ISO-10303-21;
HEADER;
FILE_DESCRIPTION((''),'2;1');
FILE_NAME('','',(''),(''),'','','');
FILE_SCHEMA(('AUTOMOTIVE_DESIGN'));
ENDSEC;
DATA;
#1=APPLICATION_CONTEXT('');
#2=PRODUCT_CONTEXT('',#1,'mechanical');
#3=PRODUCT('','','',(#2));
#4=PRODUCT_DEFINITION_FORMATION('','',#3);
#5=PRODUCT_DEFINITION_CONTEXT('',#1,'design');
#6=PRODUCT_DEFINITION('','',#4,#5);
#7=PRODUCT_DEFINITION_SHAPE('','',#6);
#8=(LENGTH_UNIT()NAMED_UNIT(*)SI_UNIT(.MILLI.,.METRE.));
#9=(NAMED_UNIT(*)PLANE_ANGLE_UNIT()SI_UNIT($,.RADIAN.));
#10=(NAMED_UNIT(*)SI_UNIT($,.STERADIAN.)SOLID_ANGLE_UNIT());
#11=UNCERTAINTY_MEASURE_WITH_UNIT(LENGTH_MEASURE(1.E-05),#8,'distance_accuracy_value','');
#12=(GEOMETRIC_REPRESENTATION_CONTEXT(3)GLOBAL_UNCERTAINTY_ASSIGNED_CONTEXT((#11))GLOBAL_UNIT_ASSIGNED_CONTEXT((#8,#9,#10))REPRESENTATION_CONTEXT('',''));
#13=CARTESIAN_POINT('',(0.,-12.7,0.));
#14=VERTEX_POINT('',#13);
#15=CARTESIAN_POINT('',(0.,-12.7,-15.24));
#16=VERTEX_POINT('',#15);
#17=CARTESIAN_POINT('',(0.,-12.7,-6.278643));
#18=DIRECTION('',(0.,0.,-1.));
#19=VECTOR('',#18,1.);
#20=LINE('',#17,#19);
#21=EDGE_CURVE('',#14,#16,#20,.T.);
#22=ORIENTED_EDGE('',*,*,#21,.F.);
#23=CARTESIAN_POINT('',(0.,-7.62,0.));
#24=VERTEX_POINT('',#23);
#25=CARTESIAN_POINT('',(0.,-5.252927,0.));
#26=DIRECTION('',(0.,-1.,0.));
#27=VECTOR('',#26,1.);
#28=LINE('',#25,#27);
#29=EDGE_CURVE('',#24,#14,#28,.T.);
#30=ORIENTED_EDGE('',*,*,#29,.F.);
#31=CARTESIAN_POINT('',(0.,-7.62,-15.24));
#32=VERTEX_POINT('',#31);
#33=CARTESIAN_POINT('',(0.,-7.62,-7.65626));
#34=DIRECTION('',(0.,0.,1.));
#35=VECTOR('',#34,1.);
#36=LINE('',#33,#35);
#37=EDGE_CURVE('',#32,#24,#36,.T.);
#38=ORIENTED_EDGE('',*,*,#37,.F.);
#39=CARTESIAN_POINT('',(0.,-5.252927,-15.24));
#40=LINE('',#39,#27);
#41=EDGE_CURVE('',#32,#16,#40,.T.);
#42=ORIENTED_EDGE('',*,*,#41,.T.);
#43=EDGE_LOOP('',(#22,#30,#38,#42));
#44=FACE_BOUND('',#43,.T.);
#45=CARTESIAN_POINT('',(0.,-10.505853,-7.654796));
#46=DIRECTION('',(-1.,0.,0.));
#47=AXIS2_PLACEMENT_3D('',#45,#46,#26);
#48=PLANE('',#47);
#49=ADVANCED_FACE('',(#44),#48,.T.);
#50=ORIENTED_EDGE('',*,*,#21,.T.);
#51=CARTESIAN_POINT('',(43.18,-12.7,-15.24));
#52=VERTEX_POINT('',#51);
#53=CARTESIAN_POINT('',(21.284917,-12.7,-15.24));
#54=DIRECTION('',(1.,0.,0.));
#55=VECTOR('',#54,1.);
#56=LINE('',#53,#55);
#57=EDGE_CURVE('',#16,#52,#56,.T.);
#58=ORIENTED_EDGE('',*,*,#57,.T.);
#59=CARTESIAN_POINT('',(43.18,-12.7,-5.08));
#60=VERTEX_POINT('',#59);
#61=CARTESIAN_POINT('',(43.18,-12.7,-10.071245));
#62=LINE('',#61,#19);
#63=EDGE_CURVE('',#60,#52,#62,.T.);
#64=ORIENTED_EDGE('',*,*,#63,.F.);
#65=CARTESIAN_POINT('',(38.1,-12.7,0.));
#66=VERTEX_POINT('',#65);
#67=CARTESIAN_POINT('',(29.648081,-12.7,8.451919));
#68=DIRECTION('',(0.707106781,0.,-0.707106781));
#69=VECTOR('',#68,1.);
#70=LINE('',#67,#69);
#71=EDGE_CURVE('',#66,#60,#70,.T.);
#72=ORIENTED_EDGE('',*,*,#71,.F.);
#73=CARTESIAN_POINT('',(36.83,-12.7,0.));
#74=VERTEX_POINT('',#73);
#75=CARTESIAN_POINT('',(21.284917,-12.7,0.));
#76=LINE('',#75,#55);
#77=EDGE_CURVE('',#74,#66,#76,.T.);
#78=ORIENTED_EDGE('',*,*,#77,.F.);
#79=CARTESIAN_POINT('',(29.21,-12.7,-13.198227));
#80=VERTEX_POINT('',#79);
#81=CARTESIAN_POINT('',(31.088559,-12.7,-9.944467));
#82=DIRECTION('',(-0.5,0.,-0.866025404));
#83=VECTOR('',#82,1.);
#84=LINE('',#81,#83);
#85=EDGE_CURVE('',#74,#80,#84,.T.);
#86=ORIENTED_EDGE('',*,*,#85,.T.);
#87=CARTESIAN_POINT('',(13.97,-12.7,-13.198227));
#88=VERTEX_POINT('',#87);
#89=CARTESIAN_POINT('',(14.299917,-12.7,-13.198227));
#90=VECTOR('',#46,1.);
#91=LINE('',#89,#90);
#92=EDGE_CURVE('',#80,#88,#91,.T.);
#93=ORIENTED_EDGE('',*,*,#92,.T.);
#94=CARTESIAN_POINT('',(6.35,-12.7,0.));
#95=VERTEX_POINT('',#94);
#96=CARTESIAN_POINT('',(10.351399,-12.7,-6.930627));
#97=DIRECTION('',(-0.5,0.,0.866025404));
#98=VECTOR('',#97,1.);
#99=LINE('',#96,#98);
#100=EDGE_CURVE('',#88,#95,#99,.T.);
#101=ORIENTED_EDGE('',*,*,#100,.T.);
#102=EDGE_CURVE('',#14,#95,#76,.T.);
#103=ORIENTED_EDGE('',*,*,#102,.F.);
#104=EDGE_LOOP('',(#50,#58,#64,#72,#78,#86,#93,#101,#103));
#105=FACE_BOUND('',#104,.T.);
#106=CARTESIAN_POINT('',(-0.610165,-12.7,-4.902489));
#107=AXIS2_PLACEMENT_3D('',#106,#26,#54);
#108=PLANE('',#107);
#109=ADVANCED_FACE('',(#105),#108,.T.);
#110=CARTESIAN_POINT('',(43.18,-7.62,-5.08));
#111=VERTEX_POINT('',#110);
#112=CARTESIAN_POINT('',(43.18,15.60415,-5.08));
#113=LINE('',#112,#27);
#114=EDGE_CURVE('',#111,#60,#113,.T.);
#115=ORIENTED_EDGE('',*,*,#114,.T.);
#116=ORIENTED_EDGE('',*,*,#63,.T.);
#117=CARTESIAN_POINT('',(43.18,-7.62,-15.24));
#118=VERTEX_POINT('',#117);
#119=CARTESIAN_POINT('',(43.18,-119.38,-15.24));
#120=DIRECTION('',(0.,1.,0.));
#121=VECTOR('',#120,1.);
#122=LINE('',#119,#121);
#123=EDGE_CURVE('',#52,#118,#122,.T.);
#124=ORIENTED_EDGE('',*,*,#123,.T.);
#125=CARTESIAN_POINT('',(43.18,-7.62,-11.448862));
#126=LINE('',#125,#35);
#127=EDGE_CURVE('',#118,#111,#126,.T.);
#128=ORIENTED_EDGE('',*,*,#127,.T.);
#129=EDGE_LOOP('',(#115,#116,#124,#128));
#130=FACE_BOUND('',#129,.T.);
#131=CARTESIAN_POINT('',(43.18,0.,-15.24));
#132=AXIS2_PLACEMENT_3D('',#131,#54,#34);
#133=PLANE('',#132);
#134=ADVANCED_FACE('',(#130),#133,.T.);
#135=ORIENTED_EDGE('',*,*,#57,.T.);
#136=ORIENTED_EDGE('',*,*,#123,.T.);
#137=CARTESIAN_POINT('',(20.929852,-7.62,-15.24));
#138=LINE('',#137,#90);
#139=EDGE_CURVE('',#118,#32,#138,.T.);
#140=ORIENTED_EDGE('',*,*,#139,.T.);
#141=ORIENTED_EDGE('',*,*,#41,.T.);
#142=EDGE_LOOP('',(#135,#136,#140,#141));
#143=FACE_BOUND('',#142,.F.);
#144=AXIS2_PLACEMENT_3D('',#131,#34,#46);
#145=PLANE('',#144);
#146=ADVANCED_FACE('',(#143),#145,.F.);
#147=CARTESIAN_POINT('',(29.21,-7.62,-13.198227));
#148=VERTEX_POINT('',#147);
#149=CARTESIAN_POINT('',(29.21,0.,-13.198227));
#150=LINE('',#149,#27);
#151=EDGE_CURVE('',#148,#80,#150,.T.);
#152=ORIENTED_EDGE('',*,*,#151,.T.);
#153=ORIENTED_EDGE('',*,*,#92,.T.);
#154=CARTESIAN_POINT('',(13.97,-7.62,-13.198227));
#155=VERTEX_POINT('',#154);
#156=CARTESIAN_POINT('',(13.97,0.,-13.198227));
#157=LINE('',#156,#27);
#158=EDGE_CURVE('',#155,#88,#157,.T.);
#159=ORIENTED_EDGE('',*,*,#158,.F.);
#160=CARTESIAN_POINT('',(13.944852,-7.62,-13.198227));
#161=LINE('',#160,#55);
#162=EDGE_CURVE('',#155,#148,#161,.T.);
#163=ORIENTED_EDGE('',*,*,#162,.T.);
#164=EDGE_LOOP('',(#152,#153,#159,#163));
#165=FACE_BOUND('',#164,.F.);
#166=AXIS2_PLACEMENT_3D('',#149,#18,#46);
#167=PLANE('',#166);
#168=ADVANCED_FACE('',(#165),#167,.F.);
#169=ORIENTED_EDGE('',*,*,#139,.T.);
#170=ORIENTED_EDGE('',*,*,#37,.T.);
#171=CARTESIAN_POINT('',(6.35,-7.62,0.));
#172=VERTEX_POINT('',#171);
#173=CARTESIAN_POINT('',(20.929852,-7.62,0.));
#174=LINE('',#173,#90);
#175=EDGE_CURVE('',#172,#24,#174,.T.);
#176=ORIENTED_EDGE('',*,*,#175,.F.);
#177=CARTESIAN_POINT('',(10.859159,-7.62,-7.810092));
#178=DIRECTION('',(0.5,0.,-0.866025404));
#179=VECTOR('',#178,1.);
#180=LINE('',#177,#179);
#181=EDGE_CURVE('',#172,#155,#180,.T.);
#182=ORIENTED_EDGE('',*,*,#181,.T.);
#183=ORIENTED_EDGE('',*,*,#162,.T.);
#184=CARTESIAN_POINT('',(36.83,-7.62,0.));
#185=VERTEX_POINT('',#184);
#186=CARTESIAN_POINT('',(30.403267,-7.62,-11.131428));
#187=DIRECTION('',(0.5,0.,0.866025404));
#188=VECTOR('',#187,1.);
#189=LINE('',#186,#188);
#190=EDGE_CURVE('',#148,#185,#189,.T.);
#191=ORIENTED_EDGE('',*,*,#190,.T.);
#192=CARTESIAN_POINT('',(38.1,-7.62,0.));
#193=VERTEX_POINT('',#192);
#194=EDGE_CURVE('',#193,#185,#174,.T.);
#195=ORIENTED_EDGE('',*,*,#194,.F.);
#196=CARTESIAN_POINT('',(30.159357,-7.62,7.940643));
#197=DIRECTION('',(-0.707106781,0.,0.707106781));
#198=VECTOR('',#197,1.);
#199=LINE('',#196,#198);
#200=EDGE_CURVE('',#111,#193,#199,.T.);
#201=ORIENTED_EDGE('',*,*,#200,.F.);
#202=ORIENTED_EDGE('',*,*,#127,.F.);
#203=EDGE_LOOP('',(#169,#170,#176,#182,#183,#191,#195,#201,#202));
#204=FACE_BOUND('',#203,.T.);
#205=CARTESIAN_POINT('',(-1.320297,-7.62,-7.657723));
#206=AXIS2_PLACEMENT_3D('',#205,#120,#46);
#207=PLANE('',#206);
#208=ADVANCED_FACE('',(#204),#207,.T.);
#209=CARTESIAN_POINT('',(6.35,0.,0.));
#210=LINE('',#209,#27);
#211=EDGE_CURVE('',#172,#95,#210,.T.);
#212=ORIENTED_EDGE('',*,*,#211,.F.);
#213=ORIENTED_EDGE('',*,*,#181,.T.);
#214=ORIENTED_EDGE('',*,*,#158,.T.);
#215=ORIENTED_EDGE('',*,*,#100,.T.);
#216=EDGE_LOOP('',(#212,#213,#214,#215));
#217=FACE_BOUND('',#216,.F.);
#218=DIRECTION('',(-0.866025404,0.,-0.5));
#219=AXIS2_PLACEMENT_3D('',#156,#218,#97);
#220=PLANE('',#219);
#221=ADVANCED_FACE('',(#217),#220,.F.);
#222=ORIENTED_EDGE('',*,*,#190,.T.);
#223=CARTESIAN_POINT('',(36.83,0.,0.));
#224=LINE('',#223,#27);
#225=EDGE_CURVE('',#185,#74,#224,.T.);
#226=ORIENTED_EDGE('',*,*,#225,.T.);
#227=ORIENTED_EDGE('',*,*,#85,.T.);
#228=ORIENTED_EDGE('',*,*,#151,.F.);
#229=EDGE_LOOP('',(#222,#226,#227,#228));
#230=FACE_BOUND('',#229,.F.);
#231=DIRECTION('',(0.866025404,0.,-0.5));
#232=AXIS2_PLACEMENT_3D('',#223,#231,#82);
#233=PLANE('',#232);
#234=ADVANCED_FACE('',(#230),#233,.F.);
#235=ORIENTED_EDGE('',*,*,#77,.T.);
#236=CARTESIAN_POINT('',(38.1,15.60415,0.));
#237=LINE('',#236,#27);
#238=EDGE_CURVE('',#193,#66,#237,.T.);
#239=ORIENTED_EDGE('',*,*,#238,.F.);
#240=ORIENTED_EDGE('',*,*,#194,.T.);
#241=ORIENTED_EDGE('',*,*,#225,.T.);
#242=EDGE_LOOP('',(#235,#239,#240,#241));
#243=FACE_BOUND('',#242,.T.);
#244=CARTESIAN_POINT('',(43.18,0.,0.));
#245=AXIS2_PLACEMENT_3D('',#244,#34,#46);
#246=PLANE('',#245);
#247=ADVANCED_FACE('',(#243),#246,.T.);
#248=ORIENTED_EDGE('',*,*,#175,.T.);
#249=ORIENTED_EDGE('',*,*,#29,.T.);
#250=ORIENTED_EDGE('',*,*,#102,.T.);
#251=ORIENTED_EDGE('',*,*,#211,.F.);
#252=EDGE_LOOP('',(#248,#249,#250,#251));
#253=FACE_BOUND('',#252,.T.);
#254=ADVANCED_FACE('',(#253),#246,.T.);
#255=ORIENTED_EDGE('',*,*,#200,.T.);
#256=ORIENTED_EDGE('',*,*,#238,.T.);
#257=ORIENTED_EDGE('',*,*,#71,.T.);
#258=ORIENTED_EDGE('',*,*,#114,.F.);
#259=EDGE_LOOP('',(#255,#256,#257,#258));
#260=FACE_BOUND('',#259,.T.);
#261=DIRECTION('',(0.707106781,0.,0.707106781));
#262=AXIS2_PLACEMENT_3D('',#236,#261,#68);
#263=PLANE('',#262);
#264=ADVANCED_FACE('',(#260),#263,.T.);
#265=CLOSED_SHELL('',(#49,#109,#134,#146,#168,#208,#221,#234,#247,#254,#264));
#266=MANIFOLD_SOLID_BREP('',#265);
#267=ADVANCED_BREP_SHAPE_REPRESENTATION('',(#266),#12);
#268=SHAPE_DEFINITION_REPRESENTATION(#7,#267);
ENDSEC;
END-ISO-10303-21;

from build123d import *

# Parameters (mm, degrees)
F1_DEPTH    = 116.84
F2_W        = 86.36
F2_H        = 15.24
F3_DEPTH    = 2.54
F4_W        = 86.36
F4_H        = 15.24
F5_DEPTH    = 2.54
F6_T1_DEPTH = 148.0482991577
F6_T3_DEPTH = 112.4882991577
F7_SIZE     = 5.08
F8_W        = 91.7793288827
F8_H        = 30.2478149533
F9_DEPTH    = 106.68
F10_W       = 99.2863364518
F10_H       = 25.3497036174
F11_DEPTH   = 10.16
F12_W       = 15.3326203581
F12_H       = 21.305212751
F13_DEPTH   = 43.18


# Not quite as in the source:
# - a fillet or chamfer that OpenCascade refuses, or shapes differently, is made with other operations: its cross-section is extruded or revolved along the edge and cut away or added


with BuildPart() as f1:
    # F0 (on Front) → F1 (new body)
    with BuildSketch(Plane.XZ):
        Polygon((43.18, 0), (36.83, 0), (29.21, -13.1982271537), (13.97, -13.1982271537), (6.35, 0), (0, 0), (-6.35, 0), (-13.97, -13.1982271537), (-29.21, -13.1982271537), (-36.83, 0), (-43.18, 0), (-43.18, -15.24), (0, -15.24), (43.18, -15.24), align=None)
    extrude(amount=F1_DEPTH)

    # F2 (on face) → F3 (join)
    with BuildSketch(Plane.XZ.offset(116.84)):
        with Locations((0, -7.62)):
            Rectangle(F2_W, F2_H)
    extrude(amount=F3_DEPTH)

    # F4 (on face) → F5 (join)
    with BuildSketch(Plane(origin=(0, 0, 0), x_dir=(-1, 0, 0), z_dir=(0, 1, 0))):
        with Locations((0, -7.62)):
            Rectangle(F4_W, F4_H)
    extrude(amount=F5_DEPTH)

    # F6: chamfer of 5.08 on 4 edges, made by hand

    # F6_s2 → F6_t1 (cut)
    with BuildSketch(Plane.XZ.offset(-15.6041495789)):
        Polygon((-38.1, 0), (-43.18, -5.08), (-43.18, 0), align=None)
        Polygon((38.1, 0), (43.18, -5.08), (43.18, 0), align=None)
    extrude(amount=F6_T1_DEPTH, mode=Mode.SUBTRACT)

    # F6_s4 → F6_t3 (cut)
    with BuildSketch(Plane.YZ.offset(-56.2441495789)):
        Polygon((-114.3, 0), (-119.38, -5.08), (-119.38, 0), align=None)
        Polygon((-2.54, 0), (2.54, -5.08), (2.54, 0), align=None)
    extrude(amount=F6_T3_DEPTH, mode=Mode.SUBTRACT)

    # F7
    f7_edges = [f1.edges().sort_by_distance(p)[0] for p in [
        (-43.18, -119.38, -10.16),
        (43.18, -119.38, -10.16),
        (43.18, 2.54, -10.16),
        (-43.18, 2.54, -10.16),
    ]]
    chamfer(f7_edges, length=F7_SIZE)

    # F8 (on face) → F9 (cut)
    with BuildSketch(Plane.XZ.offset(119.38)):
        with Locations((-0.610165298, -4.9024894834)):
            Rectangle(F8_W, F8_H)
    extrude(amount=-F9_DEPTH, mode=Mode.SUBTRACT)

    # F10 (on face) → F11 (cut)
    with BuildSketch(Plane(origin=(0, 2.54, 0), x_dir=(-1, 0, 0), z_dir=(0, 1, 0))):
        with Locations((1.3202968985, -7.6577230357)):
            Rectangle(F10_W, F10_H)
    extrude(amount=-F11_DEPTH, mode=Mode.SUBTRACT)

    # F12 (on face) → F13 (cut)
    with BuildSketch(Plane(origin=(-43.18, 0, 0), x_dir=(0, -1, 0), z_dir=(-1, 0, 0))):
        with Locations((10.5058533372, -7.6547963545)):
            Rectangle(F12_W, F12_H)
    extrude(amount=-F13_DEPTH, mode=Mode.SUBTRACT)


solid = f1.part
